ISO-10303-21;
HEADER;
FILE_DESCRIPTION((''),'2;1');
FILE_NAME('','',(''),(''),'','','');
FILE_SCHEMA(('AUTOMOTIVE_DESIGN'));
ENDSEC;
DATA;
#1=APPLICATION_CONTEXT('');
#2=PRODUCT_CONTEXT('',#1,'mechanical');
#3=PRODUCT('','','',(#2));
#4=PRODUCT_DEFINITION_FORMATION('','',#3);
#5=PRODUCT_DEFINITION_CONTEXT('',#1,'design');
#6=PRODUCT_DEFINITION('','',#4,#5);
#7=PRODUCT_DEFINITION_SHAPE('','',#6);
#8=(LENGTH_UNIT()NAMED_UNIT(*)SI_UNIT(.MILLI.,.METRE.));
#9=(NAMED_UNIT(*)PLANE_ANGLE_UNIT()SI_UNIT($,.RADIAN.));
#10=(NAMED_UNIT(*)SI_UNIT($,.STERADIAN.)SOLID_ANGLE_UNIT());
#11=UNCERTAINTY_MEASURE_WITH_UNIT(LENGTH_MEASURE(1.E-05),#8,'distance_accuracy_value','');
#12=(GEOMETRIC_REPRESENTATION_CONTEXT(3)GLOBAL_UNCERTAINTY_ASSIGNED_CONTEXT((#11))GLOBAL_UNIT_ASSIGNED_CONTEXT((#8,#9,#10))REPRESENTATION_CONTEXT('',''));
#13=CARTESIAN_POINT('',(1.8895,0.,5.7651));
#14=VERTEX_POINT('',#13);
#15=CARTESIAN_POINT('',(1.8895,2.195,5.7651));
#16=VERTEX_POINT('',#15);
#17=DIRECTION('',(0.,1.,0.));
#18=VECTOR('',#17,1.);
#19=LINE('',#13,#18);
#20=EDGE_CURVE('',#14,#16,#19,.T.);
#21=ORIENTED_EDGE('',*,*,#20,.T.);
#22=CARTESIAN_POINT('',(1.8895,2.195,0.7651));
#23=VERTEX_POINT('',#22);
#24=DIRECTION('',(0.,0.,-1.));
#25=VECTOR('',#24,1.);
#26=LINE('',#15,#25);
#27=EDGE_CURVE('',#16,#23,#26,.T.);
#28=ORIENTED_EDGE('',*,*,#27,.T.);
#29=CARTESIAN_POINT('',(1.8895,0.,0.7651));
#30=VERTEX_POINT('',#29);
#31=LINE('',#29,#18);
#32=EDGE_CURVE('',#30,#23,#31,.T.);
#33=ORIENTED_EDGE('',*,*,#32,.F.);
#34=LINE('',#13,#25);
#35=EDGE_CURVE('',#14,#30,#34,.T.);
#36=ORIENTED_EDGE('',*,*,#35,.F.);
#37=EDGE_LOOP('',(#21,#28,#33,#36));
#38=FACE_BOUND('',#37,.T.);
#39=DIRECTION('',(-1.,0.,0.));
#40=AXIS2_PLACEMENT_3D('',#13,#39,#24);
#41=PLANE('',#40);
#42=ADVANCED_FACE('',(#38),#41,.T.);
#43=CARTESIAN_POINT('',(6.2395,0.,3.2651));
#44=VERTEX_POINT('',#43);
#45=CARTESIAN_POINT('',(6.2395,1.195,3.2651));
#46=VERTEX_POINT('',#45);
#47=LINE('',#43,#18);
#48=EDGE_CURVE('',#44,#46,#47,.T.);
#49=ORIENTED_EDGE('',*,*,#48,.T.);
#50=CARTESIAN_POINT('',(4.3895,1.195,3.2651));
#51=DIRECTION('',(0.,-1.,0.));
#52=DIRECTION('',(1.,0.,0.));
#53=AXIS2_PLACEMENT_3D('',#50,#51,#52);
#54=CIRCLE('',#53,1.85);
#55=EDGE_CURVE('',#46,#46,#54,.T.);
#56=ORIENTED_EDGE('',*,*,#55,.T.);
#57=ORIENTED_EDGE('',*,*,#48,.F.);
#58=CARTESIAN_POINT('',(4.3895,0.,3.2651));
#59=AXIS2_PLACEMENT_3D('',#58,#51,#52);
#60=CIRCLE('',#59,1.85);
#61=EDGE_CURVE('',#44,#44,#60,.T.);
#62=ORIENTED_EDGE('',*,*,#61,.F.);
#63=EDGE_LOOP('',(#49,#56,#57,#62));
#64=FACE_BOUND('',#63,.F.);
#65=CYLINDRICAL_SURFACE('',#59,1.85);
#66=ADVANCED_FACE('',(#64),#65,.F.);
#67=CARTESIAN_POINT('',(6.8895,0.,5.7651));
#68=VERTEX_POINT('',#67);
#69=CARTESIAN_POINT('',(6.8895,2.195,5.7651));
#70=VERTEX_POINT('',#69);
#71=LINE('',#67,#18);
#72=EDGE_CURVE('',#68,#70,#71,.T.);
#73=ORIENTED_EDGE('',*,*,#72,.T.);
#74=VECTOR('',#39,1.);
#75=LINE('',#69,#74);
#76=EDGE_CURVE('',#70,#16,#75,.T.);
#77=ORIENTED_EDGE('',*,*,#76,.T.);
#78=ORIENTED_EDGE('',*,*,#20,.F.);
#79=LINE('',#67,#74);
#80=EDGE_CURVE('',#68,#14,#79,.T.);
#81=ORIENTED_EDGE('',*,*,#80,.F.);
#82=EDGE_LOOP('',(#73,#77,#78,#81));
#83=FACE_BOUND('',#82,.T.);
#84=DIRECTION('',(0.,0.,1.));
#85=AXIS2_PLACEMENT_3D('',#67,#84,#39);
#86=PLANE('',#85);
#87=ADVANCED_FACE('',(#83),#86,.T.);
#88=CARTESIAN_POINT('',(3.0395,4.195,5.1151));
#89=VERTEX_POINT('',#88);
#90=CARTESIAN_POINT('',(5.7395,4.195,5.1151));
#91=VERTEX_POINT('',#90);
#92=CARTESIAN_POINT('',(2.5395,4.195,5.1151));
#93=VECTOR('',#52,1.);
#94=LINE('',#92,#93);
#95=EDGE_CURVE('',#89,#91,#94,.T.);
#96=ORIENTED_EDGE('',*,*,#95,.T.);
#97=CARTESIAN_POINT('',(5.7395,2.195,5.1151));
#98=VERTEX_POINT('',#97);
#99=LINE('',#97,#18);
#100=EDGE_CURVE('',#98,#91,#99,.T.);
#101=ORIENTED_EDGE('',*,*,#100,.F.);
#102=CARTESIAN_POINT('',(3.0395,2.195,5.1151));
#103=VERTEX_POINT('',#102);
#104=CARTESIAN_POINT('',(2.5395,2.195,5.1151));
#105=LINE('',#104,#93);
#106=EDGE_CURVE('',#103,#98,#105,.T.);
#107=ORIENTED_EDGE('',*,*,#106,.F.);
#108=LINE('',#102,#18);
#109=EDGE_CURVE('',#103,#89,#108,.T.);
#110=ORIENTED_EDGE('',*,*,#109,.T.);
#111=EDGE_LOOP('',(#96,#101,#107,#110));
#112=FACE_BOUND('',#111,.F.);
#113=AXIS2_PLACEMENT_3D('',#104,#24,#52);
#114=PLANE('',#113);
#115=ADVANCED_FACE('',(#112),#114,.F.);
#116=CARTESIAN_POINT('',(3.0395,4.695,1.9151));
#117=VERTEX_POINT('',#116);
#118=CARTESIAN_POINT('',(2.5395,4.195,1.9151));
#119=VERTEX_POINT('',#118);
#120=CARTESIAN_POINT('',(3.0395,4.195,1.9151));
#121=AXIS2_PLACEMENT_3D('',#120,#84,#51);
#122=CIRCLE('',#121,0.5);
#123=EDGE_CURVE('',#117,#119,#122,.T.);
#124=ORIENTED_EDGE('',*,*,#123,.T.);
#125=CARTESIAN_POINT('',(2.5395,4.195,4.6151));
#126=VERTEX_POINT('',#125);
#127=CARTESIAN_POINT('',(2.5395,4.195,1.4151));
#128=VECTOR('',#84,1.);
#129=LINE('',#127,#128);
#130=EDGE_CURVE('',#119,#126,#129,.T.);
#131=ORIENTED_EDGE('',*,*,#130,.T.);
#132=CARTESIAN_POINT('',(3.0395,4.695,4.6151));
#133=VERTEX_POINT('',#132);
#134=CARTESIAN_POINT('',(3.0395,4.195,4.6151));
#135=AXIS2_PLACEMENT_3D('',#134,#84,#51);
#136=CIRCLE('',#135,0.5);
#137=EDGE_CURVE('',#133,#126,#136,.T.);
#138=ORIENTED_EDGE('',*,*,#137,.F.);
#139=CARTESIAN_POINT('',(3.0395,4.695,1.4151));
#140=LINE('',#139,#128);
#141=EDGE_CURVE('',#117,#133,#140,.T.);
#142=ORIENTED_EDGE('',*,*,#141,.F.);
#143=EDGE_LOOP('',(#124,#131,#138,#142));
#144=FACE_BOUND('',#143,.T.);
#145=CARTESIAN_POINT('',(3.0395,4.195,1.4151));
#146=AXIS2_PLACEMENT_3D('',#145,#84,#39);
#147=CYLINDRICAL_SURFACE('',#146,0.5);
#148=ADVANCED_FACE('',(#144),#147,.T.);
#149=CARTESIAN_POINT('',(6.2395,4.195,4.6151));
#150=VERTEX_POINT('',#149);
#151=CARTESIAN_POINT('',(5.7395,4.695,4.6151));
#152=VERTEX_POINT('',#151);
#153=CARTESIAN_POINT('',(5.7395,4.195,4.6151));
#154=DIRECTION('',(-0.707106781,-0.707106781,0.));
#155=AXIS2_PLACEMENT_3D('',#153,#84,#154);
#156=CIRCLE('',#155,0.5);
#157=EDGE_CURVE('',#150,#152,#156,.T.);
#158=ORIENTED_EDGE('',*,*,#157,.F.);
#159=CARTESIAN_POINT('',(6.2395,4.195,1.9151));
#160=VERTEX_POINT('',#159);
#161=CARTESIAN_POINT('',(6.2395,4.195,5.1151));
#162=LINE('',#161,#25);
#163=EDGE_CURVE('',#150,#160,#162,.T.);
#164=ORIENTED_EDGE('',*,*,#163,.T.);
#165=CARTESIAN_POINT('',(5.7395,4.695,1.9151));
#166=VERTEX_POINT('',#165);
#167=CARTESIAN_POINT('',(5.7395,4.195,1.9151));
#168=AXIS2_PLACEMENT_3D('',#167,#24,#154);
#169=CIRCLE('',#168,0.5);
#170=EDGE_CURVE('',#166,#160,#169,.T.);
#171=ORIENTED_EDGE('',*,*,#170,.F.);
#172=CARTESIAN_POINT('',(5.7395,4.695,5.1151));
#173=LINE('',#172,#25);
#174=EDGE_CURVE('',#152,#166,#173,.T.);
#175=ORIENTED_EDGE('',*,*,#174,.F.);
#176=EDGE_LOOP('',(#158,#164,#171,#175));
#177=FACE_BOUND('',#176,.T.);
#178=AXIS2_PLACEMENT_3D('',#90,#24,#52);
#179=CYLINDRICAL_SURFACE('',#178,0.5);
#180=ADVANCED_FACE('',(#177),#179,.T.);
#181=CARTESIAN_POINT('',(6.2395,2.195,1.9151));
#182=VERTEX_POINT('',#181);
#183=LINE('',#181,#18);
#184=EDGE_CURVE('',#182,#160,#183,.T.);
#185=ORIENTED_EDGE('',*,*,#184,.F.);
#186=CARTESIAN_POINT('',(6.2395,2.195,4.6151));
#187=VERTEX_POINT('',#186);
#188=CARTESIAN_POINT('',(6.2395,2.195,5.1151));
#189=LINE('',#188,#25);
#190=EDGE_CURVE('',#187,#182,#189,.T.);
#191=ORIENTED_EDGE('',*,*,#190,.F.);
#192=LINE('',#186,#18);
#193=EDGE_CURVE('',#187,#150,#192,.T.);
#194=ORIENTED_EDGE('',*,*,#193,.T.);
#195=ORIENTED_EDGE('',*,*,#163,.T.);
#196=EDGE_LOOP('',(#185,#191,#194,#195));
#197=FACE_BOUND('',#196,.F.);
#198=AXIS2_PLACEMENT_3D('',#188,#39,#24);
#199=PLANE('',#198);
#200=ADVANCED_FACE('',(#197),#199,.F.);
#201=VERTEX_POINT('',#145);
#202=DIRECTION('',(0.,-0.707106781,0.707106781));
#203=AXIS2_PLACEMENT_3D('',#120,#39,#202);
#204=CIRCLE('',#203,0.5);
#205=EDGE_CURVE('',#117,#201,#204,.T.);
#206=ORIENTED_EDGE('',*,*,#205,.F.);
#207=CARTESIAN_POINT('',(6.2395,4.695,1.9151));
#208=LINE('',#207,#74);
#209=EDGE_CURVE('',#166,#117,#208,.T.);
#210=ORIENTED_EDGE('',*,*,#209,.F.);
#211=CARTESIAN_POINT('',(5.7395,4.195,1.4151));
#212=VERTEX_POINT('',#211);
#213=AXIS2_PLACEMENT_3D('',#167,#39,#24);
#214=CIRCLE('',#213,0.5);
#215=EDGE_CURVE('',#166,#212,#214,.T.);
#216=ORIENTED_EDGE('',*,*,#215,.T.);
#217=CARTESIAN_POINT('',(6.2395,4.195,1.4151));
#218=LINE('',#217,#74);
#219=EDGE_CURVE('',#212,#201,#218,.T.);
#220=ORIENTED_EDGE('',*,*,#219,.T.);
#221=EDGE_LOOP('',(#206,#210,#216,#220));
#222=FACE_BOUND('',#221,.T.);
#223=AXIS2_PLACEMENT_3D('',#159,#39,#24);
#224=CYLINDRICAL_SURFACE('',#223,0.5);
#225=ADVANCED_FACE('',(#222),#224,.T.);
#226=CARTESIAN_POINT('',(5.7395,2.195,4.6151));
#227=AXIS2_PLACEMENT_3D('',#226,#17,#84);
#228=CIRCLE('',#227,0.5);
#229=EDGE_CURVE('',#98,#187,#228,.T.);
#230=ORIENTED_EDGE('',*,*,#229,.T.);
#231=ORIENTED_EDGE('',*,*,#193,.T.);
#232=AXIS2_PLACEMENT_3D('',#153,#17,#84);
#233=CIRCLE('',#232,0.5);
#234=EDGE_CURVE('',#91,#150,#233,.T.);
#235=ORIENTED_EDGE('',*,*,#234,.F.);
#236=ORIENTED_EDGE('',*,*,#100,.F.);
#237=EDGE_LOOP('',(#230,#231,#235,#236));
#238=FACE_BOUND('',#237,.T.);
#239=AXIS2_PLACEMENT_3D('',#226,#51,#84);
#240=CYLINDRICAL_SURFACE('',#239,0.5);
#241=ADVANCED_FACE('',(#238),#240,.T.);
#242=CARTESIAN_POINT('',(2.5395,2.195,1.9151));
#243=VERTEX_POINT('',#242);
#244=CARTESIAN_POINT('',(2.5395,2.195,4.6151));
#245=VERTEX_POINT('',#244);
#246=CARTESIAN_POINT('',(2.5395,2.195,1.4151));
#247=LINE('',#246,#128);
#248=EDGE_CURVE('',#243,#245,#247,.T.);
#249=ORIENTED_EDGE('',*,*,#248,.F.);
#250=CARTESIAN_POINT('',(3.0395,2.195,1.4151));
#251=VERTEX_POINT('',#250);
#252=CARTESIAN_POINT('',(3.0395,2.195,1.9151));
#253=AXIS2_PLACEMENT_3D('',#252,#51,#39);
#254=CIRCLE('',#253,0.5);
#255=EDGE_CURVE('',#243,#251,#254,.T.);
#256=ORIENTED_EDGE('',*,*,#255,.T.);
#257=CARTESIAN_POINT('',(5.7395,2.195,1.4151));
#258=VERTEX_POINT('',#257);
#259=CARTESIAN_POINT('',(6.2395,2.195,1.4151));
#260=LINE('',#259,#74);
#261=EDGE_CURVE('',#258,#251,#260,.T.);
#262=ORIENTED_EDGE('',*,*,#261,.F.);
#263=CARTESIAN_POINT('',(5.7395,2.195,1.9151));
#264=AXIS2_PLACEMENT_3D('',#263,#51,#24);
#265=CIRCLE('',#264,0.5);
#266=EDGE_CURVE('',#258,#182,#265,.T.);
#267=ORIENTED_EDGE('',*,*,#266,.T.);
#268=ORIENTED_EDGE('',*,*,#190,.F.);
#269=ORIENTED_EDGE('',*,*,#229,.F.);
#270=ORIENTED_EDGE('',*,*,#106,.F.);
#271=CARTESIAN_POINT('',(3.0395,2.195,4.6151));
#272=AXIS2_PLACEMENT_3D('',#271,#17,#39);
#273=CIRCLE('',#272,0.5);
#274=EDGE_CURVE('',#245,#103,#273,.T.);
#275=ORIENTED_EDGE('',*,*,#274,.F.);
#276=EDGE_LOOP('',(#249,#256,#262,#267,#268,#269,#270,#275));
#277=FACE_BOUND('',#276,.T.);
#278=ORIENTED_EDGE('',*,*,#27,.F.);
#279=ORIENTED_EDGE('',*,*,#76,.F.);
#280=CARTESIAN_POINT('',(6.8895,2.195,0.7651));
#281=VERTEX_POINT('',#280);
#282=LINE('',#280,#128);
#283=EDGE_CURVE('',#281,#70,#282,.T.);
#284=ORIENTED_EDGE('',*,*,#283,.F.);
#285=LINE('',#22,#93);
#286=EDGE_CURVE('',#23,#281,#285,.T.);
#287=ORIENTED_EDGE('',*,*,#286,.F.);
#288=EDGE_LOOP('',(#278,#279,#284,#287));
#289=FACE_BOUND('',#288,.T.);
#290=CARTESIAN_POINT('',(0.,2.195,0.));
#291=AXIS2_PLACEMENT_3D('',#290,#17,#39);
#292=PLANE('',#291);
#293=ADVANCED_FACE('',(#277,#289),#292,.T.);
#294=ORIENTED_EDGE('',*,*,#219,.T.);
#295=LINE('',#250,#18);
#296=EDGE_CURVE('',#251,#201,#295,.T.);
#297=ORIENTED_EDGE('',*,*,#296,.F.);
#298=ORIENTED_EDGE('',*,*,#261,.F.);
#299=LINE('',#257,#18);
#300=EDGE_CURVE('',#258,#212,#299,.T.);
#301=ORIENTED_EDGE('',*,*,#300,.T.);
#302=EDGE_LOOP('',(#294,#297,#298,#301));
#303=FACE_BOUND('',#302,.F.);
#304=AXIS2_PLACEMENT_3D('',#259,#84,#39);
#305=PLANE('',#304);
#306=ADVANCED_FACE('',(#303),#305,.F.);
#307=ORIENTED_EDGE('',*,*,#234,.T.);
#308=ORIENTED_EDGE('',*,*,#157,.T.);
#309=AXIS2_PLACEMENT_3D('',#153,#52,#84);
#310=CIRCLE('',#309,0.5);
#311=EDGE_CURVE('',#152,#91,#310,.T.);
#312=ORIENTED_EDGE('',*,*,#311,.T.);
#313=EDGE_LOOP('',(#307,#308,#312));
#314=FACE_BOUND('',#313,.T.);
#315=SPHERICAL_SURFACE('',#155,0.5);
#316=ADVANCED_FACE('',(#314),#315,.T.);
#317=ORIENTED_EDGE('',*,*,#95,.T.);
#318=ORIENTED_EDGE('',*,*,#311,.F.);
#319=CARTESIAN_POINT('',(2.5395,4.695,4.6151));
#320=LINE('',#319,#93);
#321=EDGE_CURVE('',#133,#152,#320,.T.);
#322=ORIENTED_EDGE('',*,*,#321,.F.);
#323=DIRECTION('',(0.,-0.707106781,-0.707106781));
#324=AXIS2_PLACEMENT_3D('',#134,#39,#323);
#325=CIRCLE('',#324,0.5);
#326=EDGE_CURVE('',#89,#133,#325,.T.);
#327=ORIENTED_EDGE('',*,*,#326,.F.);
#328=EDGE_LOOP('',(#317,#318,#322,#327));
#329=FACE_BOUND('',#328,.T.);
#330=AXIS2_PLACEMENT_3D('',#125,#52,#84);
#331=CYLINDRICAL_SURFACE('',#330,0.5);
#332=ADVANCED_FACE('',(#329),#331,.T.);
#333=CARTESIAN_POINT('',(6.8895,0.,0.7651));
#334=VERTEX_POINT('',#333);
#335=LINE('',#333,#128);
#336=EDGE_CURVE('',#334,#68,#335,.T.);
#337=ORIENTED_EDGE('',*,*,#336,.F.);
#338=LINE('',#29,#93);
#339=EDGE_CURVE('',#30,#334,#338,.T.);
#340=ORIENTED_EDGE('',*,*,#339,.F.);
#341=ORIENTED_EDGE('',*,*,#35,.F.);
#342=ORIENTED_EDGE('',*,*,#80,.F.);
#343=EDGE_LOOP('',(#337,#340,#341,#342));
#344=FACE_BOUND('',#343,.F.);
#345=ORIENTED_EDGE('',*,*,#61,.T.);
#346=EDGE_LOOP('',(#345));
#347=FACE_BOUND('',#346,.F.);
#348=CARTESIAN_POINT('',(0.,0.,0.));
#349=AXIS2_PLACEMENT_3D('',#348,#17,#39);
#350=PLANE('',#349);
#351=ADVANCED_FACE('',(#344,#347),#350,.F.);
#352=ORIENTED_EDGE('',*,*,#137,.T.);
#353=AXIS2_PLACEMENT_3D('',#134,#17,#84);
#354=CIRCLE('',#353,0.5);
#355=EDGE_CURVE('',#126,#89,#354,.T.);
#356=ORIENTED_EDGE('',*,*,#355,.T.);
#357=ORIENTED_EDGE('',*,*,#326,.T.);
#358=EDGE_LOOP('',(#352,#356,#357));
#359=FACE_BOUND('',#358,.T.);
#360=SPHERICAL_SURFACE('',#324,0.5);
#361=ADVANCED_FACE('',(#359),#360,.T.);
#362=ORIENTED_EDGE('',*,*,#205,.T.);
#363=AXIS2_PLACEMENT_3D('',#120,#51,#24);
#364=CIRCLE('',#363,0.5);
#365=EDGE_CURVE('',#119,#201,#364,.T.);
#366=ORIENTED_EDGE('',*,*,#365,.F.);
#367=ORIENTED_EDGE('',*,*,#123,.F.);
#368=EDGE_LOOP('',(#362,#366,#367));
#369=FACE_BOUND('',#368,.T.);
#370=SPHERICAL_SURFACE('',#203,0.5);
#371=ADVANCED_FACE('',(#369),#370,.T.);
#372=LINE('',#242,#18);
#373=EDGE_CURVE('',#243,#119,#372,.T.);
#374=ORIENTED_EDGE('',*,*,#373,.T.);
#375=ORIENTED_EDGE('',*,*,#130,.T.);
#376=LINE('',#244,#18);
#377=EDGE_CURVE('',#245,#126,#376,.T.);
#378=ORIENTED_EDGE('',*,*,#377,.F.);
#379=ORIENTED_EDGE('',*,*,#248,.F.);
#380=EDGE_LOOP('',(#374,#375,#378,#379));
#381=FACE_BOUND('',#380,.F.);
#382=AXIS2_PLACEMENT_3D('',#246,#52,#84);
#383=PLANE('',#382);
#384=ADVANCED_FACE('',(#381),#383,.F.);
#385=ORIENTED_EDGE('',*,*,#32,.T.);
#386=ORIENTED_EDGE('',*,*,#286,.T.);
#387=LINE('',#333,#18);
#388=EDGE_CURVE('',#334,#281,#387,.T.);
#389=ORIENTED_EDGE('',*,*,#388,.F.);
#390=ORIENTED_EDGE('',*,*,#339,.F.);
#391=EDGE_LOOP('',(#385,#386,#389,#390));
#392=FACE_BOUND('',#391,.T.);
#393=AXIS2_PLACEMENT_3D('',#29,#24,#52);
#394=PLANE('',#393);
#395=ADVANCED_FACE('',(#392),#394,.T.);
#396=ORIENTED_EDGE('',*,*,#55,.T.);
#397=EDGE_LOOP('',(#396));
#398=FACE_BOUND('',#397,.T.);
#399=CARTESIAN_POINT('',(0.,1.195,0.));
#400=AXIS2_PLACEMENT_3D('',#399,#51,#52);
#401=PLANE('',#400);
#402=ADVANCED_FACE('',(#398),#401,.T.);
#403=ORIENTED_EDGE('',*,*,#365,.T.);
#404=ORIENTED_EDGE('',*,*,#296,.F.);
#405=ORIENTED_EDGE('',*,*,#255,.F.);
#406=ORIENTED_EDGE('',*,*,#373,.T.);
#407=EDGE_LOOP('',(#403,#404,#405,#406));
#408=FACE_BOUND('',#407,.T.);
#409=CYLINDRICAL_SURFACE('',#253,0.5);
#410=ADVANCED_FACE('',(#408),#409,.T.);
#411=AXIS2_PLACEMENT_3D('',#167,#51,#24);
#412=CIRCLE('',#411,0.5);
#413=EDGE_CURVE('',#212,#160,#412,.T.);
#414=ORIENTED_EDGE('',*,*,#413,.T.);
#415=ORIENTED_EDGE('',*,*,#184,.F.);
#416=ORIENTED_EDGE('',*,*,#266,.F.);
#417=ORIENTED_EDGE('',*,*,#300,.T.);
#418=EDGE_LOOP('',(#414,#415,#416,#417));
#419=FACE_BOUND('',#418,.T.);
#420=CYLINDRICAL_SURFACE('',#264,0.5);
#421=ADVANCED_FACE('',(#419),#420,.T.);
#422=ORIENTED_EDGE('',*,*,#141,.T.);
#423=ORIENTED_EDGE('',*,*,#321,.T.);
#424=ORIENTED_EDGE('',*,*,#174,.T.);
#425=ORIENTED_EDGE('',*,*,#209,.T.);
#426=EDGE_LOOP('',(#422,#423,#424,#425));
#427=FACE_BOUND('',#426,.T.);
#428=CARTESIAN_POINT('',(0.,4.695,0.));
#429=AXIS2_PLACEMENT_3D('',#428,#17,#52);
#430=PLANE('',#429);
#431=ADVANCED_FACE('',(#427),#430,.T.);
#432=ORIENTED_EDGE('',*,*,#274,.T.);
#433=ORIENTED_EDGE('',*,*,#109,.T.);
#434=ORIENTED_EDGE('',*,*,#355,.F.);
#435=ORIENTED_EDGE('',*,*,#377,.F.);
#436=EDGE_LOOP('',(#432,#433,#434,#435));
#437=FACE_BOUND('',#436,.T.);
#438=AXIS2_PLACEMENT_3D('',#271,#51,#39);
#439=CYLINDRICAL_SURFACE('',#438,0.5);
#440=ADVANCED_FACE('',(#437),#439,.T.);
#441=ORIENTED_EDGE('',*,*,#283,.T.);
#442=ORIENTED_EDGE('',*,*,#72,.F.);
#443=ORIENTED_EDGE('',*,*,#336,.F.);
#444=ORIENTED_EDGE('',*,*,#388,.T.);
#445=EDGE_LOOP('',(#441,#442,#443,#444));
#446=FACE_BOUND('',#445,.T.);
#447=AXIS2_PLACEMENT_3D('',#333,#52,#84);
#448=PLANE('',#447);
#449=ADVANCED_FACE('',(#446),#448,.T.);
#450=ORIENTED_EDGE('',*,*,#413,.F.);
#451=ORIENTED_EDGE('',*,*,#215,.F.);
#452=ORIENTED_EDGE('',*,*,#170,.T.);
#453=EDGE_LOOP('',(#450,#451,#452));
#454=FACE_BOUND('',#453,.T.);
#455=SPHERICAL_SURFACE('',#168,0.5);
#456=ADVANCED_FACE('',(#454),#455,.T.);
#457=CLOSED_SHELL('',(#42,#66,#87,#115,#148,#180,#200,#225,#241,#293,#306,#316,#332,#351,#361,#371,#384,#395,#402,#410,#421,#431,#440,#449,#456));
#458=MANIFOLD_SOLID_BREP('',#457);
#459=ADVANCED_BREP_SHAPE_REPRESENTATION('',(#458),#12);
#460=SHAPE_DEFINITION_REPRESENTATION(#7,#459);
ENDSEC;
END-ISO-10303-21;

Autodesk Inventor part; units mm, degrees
ref_plane "YZ Plane" through (0, 0, 0) normal (1, 0, 0) x (0, 1, 0)
ref_plane "XZ Plane" through (0, 0, 0) normal (0, 1, 0) x (-1, 0, 0)
ref_plane "XY Plane" through (0, 0, 0) normal (0, 0, 1) x (1, 0, 0)
sketch "Esquisse6" plane through (0, 0, 0) normal (0, 1, 0) x (-1, 0, 0)
  line L0 (-6.8895, 5.7651) -> (-1.8895, 5.7651)
  line L1 (-1.8895, 5.7651) -> (-1.8895, 0.7651)
  line L2 (-1.8895, 0.7651) -> (-6.8895, 0.7651)
  line L3 (-6.8895, 0.7651) -> (-6.8895, 5.7651)
  point P0 (0, 0)
  dimension "d12" = 5
  dimension "d13" = 5
extrude "Extrusion5" add sketch "Esquisse6" along normal blind 2.195
sketch "Esquisse7" plane through (0, 0, 0) normal (0, -1, 0) x (1, 0, 0)
  line L0 (6.8895, 5.7651) -> (6.8895, 0.7651) projected
  line L1 (6.8895, 0.7651) -> (1.8895, 0.7651) projected
  circle A0 centre (4.3895, 3.2651) radius 1.85
  point P0 (0, 0)
  dimension "d19" = 3.7
extrude "Extrusion6" cut sketch "Esquisse7" against normal blind 1.195
sketch "Esquisse8" plane through (0, 2.195, 0) normal (0, 1, 0) x (1, 0, 0)
  line L0 (2.5395, -5.1151) -> (6.2395, -5.1151)
  line L1 (6.2395, -5.1151) -> (6.2395, -1.4151)
  line L2 (6.2395, -1.4151) -> (2.5395, -1.4151)
  line L3 (2.5395, -1.4151) -> (2.5395, -5.1151)
  point P0 (0, 0)
extrude "Extrusion7" add sketch "Esquisse8" along normal blind 2.5
fillet "Congé2" radius 0.5 4 edges at (4.3895, 4.695, 5.1151) (6.2395, 4.695, 3.2651) (4.3895, 4.695, 1.4151) (2.5395, 4.695, 3.2651)
fillet "Congé3" radius 0.5 8 edges at (2.686, 4.5486, 1.5615) (2.5395, 3.195, 1.4151) (2.686, 4.5486, 4.9686) (2.5395, 3.195, 5.1151) (6.0931, 4.5486, 4.9686) (6.2395, 3.195, 5.1151) (6.0931, 4.5486, 1.5615) (6.2395, 3.195, 1.4151)
properties part number "button"
